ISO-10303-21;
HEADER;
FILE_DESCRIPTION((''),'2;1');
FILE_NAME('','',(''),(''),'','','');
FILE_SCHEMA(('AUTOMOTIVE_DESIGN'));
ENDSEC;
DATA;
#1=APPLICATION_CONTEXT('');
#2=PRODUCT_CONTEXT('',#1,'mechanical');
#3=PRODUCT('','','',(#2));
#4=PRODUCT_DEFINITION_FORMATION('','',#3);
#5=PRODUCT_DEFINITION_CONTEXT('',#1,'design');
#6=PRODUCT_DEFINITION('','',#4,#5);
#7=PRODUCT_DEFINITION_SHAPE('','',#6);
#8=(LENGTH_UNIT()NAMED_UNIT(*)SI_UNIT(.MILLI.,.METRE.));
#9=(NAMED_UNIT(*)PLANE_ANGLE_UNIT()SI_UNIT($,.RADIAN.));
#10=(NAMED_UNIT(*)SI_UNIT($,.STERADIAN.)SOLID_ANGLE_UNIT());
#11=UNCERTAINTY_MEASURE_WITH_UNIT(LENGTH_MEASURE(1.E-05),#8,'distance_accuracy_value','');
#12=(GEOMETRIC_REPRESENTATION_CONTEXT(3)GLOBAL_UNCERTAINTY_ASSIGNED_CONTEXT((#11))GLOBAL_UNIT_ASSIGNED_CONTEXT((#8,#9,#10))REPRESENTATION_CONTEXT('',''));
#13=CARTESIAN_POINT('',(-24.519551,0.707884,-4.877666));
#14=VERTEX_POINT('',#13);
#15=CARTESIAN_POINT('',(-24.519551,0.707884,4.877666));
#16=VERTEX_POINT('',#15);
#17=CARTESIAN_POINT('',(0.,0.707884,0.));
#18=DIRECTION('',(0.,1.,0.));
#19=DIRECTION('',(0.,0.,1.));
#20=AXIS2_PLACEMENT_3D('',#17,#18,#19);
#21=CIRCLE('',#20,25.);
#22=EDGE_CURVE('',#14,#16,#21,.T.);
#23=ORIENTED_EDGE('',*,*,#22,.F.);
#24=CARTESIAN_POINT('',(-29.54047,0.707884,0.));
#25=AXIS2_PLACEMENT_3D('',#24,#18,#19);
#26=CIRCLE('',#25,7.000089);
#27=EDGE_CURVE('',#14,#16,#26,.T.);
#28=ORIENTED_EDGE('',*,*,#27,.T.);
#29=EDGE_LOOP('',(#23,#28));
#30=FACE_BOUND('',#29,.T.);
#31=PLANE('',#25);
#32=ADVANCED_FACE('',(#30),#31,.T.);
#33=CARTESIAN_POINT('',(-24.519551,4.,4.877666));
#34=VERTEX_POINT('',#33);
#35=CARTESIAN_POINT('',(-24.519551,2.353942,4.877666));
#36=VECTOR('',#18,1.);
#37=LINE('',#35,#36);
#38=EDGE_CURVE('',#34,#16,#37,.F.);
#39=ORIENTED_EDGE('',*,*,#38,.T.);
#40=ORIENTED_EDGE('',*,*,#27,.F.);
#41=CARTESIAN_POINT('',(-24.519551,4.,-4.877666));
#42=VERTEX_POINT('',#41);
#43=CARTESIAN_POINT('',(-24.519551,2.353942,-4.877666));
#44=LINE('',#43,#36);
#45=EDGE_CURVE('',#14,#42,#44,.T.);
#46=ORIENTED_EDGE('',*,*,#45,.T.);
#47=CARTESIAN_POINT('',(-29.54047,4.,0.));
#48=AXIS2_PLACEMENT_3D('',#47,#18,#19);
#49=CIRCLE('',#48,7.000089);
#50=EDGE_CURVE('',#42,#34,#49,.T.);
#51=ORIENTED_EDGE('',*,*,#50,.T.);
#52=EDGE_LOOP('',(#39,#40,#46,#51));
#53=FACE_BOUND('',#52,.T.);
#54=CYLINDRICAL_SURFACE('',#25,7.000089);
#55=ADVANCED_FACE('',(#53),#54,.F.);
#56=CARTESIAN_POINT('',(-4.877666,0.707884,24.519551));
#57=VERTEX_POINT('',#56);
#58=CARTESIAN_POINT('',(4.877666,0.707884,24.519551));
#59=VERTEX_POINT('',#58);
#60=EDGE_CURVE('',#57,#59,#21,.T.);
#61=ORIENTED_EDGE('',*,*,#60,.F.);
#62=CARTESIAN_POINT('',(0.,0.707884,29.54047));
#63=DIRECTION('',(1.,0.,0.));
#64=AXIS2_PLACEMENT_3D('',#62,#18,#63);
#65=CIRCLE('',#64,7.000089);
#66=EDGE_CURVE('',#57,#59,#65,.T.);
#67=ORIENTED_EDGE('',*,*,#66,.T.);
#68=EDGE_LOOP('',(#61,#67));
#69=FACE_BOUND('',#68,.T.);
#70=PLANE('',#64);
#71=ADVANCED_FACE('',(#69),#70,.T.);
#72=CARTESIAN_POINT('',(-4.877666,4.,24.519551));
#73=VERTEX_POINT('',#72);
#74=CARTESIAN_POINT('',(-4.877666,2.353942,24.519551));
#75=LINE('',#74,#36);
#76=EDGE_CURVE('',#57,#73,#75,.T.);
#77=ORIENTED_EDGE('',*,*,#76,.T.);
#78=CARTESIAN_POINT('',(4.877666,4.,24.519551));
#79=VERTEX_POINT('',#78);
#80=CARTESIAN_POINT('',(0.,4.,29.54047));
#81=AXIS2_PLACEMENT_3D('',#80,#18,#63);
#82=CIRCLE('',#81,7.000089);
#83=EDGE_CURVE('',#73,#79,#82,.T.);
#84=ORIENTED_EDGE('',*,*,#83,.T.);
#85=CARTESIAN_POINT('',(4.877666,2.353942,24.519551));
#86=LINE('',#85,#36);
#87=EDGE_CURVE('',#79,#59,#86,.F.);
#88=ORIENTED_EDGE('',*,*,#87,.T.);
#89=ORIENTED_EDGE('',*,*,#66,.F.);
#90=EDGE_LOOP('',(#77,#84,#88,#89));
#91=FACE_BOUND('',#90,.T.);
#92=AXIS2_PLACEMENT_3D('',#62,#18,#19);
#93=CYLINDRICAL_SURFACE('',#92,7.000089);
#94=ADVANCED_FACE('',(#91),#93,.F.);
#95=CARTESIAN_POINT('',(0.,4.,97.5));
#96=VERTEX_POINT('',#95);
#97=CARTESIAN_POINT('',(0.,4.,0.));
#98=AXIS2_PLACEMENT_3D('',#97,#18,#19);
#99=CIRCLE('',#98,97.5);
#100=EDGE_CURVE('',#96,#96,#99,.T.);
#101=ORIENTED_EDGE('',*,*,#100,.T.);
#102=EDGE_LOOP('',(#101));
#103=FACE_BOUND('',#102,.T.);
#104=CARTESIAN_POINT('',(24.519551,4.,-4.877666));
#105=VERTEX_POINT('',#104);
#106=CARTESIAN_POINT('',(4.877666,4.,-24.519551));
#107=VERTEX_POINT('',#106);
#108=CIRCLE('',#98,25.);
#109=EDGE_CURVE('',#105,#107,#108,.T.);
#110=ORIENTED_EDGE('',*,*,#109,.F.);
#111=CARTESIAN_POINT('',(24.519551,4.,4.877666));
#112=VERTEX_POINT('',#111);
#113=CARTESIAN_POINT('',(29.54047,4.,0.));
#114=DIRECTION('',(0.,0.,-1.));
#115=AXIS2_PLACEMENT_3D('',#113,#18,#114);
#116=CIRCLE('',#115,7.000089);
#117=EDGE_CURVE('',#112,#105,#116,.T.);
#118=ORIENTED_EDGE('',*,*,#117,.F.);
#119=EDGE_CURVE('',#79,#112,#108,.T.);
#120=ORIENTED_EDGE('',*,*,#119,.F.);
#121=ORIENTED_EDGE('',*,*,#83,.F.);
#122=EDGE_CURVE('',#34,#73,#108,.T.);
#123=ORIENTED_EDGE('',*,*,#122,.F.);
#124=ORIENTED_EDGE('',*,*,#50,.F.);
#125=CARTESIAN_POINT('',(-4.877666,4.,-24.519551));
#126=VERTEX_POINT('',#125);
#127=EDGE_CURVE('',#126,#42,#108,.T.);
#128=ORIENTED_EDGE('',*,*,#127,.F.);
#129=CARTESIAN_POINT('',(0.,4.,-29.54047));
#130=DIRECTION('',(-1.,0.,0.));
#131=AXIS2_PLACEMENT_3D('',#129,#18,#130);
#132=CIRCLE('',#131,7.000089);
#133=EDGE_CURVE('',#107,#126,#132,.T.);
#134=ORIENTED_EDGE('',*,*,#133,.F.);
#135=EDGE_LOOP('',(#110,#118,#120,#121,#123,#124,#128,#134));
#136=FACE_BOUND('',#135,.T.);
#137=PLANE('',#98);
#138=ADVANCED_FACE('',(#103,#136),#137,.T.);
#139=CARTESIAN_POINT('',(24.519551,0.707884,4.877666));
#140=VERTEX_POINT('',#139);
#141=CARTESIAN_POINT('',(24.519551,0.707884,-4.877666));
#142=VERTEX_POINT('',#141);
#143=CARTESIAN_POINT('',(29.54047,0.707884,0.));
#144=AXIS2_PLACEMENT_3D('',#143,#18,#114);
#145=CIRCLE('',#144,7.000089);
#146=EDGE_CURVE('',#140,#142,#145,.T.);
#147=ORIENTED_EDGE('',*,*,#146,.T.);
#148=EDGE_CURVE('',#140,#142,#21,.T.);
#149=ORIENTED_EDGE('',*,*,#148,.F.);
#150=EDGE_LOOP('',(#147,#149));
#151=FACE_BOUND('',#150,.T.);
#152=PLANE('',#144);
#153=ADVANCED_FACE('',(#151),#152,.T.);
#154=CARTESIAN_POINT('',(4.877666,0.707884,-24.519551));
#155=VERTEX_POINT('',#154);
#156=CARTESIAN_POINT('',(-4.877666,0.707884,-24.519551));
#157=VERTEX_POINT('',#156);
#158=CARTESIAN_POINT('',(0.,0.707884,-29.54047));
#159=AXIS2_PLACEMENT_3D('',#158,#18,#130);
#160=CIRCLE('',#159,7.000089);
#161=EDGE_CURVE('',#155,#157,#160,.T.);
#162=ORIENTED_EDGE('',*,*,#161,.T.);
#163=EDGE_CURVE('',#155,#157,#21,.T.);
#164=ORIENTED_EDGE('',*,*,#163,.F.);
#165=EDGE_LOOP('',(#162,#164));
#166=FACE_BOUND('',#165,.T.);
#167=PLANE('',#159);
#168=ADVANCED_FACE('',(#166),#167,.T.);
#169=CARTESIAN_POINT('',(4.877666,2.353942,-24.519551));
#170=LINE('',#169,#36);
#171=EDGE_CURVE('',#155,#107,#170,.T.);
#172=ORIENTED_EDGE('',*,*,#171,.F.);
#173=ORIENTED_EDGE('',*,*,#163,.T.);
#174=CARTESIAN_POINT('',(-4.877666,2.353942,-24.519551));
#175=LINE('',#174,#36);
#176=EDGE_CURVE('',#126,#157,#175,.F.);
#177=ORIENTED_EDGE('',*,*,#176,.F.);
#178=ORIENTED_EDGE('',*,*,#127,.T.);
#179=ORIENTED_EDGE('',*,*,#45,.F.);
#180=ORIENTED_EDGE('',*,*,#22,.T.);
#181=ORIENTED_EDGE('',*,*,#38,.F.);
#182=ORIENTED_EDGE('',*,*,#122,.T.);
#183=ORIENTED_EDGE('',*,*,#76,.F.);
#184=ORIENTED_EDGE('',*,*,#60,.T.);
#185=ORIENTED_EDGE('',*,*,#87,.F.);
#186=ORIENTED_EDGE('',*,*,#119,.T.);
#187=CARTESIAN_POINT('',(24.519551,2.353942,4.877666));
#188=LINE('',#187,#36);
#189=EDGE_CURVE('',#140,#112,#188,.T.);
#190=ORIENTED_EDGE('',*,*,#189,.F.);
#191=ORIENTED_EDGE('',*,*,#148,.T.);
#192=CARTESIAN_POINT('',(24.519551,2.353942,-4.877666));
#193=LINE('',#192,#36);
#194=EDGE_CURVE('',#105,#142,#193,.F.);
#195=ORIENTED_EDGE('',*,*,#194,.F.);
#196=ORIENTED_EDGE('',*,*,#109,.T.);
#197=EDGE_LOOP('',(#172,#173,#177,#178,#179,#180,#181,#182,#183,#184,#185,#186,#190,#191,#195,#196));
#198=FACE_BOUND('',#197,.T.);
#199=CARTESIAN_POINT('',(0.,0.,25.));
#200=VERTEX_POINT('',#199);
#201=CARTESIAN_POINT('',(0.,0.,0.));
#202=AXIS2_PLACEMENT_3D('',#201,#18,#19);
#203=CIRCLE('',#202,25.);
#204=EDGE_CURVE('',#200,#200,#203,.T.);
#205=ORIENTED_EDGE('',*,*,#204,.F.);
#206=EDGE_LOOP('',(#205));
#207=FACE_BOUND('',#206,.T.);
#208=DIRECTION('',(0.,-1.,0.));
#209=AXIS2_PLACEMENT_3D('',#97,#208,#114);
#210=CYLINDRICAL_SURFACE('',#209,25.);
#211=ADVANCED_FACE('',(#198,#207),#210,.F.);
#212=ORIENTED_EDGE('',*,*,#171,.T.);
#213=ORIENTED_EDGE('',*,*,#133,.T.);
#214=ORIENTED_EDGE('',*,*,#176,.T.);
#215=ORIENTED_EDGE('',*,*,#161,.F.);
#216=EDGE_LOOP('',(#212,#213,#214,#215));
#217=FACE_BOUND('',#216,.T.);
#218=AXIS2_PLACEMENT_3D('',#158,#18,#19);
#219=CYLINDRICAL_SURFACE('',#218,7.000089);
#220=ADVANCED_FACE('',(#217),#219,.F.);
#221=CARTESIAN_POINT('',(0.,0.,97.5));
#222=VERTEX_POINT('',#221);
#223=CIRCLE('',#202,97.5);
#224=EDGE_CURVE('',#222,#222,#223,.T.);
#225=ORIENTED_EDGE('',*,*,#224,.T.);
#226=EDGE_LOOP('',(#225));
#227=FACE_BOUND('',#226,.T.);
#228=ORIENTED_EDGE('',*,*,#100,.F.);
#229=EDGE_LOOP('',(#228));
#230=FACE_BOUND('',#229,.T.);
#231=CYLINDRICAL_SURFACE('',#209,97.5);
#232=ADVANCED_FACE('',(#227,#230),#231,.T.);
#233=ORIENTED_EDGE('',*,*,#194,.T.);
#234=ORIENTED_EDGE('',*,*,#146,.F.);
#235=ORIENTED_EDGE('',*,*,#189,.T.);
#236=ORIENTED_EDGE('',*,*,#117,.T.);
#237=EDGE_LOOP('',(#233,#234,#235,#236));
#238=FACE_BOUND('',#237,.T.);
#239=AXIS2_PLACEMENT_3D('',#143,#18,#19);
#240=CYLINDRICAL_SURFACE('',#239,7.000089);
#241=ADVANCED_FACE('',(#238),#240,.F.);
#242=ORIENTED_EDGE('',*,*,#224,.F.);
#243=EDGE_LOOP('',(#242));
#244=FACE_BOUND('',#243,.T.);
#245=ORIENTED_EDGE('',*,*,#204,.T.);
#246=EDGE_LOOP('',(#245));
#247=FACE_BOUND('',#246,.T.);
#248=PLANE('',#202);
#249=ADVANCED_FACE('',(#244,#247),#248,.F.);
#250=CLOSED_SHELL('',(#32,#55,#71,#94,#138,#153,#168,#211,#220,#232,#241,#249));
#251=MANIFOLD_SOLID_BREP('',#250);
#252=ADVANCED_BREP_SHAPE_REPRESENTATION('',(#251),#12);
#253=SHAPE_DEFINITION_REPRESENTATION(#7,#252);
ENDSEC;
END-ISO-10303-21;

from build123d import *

# Parameters (mm, degrees)
SKETCH1_R           = 97.5
BOSS_EXTRUDE1_DEPTH = 4
SKETCH2_R           = 25
CUT_EXTRUDE1_DEPTH  = 138.943829148
SKETCH3_R           = 7.000089202
CUT_EXTRUDE2_DEPTH  = 3.292116242
CIRPATTERN1_COUNT   = 4


with BuildPart() as part:
    # Sketch1 → Boss-Extrude1 (new body)
    with BuildSketch(Plane(origin=(0, 0, 0), x_dir=(1, 0, 0), z_dir=(0, 1, 0))):
        Circle(SKETCH1_R)
    extrude(amount=BOSS_EXTRUDE1_DEPTH)

    # Sketch2 → Cut-Extrude1 (cut, through all)
    with BuildSketch(Plane(origin=(0, 0, 0), x_dir=(1, 0, 0), z_dir=(0, 1, 0))):
        Circle(SKETCH2_R)
    extrude(amount=CUT_EXTRUDE1_DEPTH, mode=Mode.SUBTRACT)

    # Sketch3 → Cut-Extrude2 (cut)
    with BuildSketch(Plane(origin=(0, 4, 0), x_dir=(1, 0, 0), z_dir=(0, 1, 0))):
        with Locations((-29.540469542, 0)):
            Circle(SKETCH3_R)
    cut_extrude2 = extrude(amount=-CUT_EXTRUDE2_DEPTH, mode=Mode.SUBTRACT)

    # CirPattern1: Cut-Extrude2 ×4 about axis
    cirpattern1_axis = Axis((0, 0, 0), (0, 1, 0))
    for i in range(1, CIRPATTERN1_COUNT):
        add(cut_extrude2.rotate(cirpattern1_axis, i * 360 / CIRPATTERN1_COUNT), mode=Mode.SUBTRACT)


solid = part.part
